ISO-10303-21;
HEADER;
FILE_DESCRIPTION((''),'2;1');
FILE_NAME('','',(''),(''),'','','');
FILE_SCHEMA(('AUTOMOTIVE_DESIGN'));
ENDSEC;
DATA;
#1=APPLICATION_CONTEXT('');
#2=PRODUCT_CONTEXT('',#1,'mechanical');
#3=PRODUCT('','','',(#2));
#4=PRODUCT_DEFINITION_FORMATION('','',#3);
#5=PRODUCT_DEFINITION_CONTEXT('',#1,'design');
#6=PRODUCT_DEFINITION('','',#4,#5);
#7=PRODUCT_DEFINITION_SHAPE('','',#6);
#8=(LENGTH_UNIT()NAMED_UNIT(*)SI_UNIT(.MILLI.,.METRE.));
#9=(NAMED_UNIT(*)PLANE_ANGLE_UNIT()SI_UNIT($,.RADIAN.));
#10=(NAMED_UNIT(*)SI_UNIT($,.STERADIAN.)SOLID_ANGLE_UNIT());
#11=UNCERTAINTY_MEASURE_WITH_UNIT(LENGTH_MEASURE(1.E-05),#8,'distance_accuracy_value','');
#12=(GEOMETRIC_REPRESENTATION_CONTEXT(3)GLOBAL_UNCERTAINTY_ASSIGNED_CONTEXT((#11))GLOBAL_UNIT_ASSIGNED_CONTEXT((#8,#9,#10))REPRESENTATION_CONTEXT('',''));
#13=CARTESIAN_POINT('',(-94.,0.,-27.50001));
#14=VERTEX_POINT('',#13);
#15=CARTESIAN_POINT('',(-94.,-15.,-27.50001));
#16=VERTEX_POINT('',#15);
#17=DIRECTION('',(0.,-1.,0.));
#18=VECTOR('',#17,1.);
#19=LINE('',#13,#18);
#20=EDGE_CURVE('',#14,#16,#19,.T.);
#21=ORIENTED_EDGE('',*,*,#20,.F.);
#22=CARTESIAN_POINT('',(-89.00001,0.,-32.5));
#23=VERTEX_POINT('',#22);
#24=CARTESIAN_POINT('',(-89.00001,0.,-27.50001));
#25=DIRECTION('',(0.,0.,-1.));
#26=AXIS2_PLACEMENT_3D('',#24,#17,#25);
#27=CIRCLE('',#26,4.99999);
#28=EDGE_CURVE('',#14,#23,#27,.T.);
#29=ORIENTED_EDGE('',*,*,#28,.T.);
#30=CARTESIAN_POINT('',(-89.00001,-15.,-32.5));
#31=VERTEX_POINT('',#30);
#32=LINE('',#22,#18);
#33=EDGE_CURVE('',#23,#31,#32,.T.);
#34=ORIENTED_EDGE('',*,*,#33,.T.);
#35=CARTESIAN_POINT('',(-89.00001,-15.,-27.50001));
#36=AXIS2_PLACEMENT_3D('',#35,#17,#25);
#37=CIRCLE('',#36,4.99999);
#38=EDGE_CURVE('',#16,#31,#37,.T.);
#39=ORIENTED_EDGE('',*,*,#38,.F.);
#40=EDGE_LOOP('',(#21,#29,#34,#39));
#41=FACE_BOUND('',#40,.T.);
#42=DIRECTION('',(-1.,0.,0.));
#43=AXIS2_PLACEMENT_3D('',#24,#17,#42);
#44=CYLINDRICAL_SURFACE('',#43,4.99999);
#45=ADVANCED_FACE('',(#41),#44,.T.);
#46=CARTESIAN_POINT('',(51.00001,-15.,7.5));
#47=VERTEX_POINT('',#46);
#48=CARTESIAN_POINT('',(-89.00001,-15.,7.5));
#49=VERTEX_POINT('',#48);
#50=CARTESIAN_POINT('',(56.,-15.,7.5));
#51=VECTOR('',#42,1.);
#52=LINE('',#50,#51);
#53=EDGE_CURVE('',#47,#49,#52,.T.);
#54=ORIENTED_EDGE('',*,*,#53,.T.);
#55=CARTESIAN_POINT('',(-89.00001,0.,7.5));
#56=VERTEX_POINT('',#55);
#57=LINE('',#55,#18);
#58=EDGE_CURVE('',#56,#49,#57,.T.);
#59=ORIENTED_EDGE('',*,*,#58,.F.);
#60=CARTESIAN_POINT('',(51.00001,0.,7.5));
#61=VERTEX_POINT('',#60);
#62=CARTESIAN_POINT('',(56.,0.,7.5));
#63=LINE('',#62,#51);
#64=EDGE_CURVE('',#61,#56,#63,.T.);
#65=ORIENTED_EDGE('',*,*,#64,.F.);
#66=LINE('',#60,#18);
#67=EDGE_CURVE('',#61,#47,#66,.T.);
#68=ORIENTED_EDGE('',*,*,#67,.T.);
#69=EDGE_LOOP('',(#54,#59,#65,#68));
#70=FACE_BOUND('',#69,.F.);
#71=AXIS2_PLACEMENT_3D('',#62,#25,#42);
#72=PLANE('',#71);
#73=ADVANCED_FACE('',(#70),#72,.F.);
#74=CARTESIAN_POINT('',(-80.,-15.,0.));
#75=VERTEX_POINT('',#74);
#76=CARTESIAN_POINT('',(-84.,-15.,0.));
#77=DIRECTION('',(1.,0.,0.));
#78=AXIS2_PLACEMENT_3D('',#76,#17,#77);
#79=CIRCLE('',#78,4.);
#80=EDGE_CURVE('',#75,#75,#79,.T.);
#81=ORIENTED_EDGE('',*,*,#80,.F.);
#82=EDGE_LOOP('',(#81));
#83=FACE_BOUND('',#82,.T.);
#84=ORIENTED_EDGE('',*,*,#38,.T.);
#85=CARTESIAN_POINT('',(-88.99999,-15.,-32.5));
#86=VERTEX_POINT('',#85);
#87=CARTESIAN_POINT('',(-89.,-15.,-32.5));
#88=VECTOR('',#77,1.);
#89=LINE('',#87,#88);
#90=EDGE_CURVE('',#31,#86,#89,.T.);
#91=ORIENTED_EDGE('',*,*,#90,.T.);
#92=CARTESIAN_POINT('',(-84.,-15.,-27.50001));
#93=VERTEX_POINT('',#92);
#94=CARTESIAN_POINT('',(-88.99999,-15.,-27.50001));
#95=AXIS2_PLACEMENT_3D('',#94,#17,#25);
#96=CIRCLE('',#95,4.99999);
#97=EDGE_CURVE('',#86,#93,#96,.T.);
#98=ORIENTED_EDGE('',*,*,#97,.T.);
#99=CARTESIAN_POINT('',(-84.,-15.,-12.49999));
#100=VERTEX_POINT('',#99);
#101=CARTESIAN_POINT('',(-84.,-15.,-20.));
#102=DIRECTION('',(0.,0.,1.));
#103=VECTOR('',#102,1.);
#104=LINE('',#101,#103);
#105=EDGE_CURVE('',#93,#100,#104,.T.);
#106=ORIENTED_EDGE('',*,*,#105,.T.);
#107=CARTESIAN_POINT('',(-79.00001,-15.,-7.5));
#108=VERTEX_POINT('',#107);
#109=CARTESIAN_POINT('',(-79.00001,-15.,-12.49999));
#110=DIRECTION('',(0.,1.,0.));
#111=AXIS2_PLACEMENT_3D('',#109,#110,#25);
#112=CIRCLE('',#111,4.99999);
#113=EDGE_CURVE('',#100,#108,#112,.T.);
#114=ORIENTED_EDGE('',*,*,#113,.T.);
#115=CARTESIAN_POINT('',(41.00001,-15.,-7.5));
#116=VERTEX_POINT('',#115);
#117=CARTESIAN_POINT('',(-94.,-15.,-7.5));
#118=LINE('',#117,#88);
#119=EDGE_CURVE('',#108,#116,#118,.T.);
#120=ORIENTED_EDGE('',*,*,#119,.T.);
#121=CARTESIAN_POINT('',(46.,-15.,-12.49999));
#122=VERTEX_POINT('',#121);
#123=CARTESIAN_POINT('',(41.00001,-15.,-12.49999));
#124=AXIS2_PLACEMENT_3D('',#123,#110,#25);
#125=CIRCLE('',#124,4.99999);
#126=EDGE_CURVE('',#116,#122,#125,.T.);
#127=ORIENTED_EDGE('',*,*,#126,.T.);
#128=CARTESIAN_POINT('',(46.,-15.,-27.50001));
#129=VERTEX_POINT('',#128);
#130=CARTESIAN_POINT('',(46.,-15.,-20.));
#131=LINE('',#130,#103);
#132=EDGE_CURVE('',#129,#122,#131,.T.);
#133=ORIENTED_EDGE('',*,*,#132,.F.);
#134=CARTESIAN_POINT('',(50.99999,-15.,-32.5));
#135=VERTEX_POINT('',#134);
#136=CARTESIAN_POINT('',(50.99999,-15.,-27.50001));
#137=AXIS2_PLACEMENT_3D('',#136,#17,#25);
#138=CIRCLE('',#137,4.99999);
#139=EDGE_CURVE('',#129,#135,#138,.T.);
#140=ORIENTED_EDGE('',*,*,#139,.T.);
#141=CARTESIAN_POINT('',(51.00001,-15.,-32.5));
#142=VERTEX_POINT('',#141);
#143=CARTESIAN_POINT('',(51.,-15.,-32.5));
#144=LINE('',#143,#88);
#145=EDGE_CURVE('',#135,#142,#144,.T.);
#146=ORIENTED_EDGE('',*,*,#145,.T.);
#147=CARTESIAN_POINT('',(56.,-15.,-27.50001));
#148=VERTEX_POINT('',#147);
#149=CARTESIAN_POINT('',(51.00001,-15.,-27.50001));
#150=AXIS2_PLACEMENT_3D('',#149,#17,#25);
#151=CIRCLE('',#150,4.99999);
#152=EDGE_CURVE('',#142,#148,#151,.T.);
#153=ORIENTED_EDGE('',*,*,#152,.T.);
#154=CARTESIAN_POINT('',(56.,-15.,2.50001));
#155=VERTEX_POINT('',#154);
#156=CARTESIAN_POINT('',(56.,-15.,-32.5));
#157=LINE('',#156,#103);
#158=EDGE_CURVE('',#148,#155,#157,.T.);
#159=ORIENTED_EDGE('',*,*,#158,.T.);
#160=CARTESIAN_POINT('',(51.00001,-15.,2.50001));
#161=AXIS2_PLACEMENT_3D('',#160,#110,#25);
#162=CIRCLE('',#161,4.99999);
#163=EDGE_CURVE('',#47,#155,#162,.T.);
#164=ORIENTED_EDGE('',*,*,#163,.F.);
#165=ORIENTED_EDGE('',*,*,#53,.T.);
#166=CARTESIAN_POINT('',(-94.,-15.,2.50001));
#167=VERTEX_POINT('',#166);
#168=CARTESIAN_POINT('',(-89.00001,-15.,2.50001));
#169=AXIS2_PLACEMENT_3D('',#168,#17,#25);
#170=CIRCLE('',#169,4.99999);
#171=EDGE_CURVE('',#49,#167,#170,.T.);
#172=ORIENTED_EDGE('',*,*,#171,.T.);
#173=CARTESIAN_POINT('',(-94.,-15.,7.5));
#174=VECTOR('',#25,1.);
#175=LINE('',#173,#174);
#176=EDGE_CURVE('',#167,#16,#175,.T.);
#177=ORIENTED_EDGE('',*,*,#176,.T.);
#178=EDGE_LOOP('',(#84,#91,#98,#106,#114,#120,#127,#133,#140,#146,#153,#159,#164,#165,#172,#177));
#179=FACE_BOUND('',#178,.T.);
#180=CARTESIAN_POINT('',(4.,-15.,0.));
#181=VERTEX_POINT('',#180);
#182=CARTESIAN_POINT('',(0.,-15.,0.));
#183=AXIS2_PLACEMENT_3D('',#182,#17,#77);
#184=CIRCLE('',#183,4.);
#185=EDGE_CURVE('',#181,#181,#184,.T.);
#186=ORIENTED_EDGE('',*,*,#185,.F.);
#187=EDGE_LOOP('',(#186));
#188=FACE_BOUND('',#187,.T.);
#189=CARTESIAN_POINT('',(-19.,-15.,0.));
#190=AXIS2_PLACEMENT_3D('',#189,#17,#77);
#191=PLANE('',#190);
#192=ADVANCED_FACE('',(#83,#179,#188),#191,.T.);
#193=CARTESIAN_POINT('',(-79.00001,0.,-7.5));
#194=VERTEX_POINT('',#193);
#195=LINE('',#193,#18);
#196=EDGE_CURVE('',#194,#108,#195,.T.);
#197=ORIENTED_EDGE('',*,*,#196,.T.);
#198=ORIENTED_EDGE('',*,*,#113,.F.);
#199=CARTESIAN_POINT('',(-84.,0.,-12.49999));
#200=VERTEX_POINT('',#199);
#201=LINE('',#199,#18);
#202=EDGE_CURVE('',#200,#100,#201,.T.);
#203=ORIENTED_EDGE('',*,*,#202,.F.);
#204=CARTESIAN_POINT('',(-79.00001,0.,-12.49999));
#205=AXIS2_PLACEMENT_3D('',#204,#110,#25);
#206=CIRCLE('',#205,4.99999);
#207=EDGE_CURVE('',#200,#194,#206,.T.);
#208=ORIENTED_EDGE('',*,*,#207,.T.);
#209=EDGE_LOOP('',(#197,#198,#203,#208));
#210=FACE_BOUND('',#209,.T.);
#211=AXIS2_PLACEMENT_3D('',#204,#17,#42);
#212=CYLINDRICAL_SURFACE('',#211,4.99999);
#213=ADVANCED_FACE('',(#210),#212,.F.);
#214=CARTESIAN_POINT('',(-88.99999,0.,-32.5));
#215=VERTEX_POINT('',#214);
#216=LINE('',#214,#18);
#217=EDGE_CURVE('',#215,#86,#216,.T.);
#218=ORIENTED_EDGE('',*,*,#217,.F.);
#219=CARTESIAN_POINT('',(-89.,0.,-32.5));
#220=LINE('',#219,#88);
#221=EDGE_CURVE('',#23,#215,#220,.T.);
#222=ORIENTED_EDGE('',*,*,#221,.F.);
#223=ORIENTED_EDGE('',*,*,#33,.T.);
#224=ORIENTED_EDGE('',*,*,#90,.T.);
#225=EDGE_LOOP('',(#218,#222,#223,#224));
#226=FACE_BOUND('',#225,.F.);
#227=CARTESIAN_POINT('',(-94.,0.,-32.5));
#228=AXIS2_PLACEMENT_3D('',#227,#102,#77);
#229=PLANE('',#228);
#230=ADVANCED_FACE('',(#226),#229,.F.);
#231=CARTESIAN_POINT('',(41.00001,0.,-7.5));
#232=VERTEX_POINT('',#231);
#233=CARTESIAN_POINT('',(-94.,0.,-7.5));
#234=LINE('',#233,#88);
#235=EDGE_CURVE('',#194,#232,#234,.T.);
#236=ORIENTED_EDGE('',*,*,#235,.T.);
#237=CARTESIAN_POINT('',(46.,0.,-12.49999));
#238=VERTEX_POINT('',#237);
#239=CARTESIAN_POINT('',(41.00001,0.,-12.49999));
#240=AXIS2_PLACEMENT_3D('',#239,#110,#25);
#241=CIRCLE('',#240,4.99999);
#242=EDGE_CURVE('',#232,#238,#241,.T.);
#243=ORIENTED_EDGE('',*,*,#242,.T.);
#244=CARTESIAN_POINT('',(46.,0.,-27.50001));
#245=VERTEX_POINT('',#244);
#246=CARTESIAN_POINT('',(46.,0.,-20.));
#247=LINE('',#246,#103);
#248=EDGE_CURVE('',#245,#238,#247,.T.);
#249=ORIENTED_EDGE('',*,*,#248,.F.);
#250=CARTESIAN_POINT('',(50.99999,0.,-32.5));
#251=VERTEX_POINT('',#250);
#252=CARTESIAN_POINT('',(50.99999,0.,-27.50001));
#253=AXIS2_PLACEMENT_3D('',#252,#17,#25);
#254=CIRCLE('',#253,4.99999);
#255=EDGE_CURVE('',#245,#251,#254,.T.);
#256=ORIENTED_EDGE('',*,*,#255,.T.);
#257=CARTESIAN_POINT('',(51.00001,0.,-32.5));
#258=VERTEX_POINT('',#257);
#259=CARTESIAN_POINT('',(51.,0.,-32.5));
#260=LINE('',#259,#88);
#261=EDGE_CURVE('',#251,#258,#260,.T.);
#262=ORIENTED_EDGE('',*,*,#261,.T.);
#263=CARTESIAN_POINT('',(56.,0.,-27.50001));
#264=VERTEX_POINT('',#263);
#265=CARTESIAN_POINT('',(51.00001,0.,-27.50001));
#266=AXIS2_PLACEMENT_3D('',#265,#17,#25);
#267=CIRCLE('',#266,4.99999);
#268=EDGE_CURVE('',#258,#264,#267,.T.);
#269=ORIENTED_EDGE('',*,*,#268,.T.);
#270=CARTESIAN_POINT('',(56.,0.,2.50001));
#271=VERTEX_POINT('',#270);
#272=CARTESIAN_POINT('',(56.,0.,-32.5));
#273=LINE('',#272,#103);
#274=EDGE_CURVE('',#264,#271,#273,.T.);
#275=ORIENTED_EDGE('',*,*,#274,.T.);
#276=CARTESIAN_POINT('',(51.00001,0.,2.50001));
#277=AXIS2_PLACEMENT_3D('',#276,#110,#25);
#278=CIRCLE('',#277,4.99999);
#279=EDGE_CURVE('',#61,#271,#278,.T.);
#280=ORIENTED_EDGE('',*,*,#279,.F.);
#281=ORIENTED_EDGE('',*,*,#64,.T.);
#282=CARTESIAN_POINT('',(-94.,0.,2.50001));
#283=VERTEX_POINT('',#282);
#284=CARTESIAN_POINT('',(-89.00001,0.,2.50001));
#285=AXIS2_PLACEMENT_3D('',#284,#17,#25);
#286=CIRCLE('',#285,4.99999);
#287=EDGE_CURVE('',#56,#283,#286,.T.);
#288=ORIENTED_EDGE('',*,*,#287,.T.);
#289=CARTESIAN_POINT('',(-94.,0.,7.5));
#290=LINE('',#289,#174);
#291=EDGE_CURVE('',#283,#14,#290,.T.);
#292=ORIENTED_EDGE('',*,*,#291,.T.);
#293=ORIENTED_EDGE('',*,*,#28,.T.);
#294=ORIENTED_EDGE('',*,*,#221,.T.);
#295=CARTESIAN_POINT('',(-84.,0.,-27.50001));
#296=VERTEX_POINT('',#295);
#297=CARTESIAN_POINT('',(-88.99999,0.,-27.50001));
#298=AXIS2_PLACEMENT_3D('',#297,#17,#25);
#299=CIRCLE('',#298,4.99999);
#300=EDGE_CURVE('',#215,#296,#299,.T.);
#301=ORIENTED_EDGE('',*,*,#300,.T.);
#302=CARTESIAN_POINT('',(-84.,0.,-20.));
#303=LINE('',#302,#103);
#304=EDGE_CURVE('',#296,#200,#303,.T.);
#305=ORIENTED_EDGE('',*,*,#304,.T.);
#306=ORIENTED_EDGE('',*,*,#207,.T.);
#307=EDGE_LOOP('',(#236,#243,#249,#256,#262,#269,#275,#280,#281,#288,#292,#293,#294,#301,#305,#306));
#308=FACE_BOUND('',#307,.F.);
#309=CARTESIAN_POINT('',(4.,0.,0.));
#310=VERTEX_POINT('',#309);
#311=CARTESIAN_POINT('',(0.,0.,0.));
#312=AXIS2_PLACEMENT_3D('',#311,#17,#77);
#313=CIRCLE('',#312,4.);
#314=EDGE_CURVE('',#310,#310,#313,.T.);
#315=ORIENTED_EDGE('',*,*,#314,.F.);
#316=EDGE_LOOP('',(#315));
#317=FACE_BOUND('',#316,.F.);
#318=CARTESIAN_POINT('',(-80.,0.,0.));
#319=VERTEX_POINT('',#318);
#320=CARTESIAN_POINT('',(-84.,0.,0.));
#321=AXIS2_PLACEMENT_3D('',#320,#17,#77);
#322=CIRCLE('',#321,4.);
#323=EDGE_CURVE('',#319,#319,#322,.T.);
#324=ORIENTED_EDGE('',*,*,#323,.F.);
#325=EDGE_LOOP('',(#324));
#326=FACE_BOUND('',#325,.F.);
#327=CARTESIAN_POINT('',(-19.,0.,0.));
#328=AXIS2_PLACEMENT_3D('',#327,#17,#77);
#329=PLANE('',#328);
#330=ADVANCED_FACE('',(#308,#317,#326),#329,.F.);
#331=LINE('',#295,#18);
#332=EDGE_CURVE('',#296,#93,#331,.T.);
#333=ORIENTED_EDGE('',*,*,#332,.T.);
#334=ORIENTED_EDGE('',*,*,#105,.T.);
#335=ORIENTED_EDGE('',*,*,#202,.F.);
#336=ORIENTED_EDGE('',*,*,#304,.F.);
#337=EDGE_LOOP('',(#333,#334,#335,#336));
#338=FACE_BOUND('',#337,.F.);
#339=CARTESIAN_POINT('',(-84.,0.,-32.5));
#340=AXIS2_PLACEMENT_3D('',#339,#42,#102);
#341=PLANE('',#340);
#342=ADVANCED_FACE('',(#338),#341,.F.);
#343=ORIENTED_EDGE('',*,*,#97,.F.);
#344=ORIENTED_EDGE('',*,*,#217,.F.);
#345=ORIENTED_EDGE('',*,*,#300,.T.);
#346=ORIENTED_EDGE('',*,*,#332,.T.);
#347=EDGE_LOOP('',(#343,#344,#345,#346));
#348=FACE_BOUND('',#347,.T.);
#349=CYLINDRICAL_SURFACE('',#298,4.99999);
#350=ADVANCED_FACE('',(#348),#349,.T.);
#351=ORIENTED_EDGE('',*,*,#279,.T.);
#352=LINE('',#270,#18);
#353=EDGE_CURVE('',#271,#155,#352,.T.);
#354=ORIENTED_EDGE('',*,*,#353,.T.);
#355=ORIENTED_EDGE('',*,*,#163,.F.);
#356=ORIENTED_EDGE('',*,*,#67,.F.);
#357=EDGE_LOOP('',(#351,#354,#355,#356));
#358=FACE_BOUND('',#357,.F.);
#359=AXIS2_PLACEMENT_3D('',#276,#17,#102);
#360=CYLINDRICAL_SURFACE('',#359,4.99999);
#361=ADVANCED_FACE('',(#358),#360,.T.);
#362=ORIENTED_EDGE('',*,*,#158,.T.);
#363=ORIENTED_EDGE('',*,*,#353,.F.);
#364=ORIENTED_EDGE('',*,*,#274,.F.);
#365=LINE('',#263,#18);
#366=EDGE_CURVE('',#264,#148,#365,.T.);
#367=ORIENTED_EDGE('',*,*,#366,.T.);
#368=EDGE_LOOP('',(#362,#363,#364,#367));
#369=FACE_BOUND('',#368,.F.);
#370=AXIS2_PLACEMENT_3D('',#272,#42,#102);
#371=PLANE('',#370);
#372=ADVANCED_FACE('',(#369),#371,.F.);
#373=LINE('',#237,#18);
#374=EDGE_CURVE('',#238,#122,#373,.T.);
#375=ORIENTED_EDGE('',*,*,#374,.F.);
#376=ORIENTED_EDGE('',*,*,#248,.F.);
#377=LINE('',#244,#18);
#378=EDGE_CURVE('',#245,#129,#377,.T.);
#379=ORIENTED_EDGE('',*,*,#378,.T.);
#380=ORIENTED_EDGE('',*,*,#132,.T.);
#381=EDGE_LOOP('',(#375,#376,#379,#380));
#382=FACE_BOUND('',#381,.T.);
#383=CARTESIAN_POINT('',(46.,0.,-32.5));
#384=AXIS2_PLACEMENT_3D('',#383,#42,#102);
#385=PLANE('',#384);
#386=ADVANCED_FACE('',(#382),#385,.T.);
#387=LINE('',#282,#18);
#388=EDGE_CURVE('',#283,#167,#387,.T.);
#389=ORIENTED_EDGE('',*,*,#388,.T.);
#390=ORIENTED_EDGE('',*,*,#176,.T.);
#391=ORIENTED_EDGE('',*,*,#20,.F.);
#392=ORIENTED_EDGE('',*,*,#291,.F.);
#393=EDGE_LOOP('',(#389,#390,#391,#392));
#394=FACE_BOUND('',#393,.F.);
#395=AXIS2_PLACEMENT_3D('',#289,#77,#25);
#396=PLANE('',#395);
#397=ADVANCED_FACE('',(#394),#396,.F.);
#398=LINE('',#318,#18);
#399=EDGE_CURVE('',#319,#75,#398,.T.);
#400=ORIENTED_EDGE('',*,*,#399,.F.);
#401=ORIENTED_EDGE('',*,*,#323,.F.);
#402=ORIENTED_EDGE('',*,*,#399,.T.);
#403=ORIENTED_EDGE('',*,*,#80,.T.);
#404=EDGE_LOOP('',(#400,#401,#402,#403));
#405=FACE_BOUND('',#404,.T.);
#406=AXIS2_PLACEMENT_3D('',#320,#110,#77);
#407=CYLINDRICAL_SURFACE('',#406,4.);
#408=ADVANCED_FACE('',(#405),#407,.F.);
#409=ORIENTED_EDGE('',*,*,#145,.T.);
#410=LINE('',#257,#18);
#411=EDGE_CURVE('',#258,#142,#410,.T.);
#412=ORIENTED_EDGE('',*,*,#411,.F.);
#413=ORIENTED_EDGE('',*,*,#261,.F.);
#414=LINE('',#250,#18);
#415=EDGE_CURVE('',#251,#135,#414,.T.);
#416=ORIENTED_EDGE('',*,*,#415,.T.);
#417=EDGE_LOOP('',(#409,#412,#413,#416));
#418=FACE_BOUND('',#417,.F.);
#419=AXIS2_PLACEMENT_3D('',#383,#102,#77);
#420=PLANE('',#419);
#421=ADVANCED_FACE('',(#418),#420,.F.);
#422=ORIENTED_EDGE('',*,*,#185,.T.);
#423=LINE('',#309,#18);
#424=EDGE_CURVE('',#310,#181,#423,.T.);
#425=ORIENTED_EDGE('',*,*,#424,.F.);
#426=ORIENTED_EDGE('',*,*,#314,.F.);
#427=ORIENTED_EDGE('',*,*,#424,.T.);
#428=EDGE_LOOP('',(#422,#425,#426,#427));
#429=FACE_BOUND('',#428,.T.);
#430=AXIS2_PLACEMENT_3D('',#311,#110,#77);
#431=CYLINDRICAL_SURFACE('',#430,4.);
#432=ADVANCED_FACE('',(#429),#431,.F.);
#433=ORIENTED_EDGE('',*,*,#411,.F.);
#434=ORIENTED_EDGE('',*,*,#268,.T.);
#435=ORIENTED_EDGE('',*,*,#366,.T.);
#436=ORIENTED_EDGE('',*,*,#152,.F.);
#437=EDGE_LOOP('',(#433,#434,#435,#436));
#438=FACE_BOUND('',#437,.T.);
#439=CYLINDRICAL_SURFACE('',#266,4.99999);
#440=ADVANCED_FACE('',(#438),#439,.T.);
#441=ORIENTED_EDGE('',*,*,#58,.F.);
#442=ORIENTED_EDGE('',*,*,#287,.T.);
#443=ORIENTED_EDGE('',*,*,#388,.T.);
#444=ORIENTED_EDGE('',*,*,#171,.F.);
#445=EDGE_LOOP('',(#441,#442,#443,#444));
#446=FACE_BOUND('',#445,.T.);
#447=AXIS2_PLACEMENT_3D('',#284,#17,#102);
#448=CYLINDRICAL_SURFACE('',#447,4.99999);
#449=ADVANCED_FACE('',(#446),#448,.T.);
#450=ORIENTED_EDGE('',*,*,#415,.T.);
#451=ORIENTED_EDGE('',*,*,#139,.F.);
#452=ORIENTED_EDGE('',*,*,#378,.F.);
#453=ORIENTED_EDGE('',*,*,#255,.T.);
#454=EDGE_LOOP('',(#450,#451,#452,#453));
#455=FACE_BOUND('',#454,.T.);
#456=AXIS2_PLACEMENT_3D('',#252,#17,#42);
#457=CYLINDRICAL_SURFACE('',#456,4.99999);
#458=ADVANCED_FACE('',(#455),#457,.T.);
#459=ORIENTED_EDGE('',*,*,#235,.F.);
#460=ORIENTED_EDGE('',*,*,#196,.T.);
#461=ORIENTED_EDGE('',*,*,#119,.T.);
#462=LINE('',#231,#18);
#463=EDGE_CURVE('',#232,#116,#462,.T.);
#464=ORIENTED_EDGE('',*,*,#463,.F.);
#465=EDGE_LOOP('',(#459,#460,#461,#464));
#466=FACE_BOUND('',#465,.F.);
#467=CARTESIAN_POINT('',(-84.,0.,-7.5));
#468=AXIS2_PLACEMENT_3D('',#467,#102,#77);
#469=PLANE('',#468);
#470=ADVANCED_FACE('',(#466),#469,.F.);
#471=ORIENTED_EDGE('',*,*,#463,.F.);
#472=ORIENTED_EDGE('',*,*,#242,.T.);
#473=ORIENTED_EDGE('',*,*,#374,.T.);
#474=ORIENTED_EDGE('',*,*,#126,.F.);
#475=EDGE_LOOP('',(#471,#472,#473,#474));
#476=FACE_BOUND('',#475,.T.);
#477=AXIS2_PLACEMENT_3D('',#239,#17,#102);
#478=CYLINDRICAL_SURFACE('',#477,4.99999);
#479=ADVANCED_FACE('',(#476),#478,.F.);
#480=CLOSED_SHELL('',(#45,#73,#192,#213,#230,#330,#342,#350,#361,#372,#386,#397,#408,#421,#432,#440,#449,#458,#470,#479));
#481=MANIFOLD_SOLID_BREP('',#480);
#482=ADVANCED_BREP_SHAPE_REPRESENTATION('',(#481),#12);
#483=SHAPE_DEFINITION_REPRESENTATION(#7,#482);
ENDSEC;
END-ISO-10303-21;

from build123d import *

# Parameters (mm, degrees)
F0_R     = 4
F0_W     = 10
F0_H     = 25
F1_DEPTH = 15
F2_R     = 4.99999


# Not quite as in the source:
# - a fillet or chamfer is up to 0.001 mm smaller than in the source, because OpenCascade refuses the exact size


with BuildPart() as f1:
    # F0 (on Front) → F1 (new body)
    with BuildSketch(Plane.XZ):
        Polygon((56, 7.5), (-94, 7.5), (-94, -7.5), (-84, -7.5), (46, -7.5), (56, -7.5), align=None)
        with Locations((-84, 0)):
            Circle(F0_R, mode=Mode.SUBTRACT)
        Circle(F0_R, mode=Mode.SUBTRACT)
        with Locations((-89, -20)):
            Rectangle(F0_W, F0_H)
        with Locations((51, -20)):
            Rectangle(F0_W, F0_H)
    extrude(amount=F1_DEPTH)

    # F2 (radius 5 in the source; OpenCascade refuses exactly that, so slightly less here)
    f2_edges = [f1.edges().sort_by_distance(p)[0] for p in [
        (-84, -7.5, -7.5),
        (46, -7.5, -7.5),
        (56, -7.5, 7.5),
        (56, -7.5, -32.5),
        (46, -7.5, -32.5),
        (-94, -7.5, -32.5),
        (-84, -7.5, -32.5),
        (-94, -7.5, 7.5),
    ]]
    fillet(f2_edges, radius=F2_R)


solid = f1.part
